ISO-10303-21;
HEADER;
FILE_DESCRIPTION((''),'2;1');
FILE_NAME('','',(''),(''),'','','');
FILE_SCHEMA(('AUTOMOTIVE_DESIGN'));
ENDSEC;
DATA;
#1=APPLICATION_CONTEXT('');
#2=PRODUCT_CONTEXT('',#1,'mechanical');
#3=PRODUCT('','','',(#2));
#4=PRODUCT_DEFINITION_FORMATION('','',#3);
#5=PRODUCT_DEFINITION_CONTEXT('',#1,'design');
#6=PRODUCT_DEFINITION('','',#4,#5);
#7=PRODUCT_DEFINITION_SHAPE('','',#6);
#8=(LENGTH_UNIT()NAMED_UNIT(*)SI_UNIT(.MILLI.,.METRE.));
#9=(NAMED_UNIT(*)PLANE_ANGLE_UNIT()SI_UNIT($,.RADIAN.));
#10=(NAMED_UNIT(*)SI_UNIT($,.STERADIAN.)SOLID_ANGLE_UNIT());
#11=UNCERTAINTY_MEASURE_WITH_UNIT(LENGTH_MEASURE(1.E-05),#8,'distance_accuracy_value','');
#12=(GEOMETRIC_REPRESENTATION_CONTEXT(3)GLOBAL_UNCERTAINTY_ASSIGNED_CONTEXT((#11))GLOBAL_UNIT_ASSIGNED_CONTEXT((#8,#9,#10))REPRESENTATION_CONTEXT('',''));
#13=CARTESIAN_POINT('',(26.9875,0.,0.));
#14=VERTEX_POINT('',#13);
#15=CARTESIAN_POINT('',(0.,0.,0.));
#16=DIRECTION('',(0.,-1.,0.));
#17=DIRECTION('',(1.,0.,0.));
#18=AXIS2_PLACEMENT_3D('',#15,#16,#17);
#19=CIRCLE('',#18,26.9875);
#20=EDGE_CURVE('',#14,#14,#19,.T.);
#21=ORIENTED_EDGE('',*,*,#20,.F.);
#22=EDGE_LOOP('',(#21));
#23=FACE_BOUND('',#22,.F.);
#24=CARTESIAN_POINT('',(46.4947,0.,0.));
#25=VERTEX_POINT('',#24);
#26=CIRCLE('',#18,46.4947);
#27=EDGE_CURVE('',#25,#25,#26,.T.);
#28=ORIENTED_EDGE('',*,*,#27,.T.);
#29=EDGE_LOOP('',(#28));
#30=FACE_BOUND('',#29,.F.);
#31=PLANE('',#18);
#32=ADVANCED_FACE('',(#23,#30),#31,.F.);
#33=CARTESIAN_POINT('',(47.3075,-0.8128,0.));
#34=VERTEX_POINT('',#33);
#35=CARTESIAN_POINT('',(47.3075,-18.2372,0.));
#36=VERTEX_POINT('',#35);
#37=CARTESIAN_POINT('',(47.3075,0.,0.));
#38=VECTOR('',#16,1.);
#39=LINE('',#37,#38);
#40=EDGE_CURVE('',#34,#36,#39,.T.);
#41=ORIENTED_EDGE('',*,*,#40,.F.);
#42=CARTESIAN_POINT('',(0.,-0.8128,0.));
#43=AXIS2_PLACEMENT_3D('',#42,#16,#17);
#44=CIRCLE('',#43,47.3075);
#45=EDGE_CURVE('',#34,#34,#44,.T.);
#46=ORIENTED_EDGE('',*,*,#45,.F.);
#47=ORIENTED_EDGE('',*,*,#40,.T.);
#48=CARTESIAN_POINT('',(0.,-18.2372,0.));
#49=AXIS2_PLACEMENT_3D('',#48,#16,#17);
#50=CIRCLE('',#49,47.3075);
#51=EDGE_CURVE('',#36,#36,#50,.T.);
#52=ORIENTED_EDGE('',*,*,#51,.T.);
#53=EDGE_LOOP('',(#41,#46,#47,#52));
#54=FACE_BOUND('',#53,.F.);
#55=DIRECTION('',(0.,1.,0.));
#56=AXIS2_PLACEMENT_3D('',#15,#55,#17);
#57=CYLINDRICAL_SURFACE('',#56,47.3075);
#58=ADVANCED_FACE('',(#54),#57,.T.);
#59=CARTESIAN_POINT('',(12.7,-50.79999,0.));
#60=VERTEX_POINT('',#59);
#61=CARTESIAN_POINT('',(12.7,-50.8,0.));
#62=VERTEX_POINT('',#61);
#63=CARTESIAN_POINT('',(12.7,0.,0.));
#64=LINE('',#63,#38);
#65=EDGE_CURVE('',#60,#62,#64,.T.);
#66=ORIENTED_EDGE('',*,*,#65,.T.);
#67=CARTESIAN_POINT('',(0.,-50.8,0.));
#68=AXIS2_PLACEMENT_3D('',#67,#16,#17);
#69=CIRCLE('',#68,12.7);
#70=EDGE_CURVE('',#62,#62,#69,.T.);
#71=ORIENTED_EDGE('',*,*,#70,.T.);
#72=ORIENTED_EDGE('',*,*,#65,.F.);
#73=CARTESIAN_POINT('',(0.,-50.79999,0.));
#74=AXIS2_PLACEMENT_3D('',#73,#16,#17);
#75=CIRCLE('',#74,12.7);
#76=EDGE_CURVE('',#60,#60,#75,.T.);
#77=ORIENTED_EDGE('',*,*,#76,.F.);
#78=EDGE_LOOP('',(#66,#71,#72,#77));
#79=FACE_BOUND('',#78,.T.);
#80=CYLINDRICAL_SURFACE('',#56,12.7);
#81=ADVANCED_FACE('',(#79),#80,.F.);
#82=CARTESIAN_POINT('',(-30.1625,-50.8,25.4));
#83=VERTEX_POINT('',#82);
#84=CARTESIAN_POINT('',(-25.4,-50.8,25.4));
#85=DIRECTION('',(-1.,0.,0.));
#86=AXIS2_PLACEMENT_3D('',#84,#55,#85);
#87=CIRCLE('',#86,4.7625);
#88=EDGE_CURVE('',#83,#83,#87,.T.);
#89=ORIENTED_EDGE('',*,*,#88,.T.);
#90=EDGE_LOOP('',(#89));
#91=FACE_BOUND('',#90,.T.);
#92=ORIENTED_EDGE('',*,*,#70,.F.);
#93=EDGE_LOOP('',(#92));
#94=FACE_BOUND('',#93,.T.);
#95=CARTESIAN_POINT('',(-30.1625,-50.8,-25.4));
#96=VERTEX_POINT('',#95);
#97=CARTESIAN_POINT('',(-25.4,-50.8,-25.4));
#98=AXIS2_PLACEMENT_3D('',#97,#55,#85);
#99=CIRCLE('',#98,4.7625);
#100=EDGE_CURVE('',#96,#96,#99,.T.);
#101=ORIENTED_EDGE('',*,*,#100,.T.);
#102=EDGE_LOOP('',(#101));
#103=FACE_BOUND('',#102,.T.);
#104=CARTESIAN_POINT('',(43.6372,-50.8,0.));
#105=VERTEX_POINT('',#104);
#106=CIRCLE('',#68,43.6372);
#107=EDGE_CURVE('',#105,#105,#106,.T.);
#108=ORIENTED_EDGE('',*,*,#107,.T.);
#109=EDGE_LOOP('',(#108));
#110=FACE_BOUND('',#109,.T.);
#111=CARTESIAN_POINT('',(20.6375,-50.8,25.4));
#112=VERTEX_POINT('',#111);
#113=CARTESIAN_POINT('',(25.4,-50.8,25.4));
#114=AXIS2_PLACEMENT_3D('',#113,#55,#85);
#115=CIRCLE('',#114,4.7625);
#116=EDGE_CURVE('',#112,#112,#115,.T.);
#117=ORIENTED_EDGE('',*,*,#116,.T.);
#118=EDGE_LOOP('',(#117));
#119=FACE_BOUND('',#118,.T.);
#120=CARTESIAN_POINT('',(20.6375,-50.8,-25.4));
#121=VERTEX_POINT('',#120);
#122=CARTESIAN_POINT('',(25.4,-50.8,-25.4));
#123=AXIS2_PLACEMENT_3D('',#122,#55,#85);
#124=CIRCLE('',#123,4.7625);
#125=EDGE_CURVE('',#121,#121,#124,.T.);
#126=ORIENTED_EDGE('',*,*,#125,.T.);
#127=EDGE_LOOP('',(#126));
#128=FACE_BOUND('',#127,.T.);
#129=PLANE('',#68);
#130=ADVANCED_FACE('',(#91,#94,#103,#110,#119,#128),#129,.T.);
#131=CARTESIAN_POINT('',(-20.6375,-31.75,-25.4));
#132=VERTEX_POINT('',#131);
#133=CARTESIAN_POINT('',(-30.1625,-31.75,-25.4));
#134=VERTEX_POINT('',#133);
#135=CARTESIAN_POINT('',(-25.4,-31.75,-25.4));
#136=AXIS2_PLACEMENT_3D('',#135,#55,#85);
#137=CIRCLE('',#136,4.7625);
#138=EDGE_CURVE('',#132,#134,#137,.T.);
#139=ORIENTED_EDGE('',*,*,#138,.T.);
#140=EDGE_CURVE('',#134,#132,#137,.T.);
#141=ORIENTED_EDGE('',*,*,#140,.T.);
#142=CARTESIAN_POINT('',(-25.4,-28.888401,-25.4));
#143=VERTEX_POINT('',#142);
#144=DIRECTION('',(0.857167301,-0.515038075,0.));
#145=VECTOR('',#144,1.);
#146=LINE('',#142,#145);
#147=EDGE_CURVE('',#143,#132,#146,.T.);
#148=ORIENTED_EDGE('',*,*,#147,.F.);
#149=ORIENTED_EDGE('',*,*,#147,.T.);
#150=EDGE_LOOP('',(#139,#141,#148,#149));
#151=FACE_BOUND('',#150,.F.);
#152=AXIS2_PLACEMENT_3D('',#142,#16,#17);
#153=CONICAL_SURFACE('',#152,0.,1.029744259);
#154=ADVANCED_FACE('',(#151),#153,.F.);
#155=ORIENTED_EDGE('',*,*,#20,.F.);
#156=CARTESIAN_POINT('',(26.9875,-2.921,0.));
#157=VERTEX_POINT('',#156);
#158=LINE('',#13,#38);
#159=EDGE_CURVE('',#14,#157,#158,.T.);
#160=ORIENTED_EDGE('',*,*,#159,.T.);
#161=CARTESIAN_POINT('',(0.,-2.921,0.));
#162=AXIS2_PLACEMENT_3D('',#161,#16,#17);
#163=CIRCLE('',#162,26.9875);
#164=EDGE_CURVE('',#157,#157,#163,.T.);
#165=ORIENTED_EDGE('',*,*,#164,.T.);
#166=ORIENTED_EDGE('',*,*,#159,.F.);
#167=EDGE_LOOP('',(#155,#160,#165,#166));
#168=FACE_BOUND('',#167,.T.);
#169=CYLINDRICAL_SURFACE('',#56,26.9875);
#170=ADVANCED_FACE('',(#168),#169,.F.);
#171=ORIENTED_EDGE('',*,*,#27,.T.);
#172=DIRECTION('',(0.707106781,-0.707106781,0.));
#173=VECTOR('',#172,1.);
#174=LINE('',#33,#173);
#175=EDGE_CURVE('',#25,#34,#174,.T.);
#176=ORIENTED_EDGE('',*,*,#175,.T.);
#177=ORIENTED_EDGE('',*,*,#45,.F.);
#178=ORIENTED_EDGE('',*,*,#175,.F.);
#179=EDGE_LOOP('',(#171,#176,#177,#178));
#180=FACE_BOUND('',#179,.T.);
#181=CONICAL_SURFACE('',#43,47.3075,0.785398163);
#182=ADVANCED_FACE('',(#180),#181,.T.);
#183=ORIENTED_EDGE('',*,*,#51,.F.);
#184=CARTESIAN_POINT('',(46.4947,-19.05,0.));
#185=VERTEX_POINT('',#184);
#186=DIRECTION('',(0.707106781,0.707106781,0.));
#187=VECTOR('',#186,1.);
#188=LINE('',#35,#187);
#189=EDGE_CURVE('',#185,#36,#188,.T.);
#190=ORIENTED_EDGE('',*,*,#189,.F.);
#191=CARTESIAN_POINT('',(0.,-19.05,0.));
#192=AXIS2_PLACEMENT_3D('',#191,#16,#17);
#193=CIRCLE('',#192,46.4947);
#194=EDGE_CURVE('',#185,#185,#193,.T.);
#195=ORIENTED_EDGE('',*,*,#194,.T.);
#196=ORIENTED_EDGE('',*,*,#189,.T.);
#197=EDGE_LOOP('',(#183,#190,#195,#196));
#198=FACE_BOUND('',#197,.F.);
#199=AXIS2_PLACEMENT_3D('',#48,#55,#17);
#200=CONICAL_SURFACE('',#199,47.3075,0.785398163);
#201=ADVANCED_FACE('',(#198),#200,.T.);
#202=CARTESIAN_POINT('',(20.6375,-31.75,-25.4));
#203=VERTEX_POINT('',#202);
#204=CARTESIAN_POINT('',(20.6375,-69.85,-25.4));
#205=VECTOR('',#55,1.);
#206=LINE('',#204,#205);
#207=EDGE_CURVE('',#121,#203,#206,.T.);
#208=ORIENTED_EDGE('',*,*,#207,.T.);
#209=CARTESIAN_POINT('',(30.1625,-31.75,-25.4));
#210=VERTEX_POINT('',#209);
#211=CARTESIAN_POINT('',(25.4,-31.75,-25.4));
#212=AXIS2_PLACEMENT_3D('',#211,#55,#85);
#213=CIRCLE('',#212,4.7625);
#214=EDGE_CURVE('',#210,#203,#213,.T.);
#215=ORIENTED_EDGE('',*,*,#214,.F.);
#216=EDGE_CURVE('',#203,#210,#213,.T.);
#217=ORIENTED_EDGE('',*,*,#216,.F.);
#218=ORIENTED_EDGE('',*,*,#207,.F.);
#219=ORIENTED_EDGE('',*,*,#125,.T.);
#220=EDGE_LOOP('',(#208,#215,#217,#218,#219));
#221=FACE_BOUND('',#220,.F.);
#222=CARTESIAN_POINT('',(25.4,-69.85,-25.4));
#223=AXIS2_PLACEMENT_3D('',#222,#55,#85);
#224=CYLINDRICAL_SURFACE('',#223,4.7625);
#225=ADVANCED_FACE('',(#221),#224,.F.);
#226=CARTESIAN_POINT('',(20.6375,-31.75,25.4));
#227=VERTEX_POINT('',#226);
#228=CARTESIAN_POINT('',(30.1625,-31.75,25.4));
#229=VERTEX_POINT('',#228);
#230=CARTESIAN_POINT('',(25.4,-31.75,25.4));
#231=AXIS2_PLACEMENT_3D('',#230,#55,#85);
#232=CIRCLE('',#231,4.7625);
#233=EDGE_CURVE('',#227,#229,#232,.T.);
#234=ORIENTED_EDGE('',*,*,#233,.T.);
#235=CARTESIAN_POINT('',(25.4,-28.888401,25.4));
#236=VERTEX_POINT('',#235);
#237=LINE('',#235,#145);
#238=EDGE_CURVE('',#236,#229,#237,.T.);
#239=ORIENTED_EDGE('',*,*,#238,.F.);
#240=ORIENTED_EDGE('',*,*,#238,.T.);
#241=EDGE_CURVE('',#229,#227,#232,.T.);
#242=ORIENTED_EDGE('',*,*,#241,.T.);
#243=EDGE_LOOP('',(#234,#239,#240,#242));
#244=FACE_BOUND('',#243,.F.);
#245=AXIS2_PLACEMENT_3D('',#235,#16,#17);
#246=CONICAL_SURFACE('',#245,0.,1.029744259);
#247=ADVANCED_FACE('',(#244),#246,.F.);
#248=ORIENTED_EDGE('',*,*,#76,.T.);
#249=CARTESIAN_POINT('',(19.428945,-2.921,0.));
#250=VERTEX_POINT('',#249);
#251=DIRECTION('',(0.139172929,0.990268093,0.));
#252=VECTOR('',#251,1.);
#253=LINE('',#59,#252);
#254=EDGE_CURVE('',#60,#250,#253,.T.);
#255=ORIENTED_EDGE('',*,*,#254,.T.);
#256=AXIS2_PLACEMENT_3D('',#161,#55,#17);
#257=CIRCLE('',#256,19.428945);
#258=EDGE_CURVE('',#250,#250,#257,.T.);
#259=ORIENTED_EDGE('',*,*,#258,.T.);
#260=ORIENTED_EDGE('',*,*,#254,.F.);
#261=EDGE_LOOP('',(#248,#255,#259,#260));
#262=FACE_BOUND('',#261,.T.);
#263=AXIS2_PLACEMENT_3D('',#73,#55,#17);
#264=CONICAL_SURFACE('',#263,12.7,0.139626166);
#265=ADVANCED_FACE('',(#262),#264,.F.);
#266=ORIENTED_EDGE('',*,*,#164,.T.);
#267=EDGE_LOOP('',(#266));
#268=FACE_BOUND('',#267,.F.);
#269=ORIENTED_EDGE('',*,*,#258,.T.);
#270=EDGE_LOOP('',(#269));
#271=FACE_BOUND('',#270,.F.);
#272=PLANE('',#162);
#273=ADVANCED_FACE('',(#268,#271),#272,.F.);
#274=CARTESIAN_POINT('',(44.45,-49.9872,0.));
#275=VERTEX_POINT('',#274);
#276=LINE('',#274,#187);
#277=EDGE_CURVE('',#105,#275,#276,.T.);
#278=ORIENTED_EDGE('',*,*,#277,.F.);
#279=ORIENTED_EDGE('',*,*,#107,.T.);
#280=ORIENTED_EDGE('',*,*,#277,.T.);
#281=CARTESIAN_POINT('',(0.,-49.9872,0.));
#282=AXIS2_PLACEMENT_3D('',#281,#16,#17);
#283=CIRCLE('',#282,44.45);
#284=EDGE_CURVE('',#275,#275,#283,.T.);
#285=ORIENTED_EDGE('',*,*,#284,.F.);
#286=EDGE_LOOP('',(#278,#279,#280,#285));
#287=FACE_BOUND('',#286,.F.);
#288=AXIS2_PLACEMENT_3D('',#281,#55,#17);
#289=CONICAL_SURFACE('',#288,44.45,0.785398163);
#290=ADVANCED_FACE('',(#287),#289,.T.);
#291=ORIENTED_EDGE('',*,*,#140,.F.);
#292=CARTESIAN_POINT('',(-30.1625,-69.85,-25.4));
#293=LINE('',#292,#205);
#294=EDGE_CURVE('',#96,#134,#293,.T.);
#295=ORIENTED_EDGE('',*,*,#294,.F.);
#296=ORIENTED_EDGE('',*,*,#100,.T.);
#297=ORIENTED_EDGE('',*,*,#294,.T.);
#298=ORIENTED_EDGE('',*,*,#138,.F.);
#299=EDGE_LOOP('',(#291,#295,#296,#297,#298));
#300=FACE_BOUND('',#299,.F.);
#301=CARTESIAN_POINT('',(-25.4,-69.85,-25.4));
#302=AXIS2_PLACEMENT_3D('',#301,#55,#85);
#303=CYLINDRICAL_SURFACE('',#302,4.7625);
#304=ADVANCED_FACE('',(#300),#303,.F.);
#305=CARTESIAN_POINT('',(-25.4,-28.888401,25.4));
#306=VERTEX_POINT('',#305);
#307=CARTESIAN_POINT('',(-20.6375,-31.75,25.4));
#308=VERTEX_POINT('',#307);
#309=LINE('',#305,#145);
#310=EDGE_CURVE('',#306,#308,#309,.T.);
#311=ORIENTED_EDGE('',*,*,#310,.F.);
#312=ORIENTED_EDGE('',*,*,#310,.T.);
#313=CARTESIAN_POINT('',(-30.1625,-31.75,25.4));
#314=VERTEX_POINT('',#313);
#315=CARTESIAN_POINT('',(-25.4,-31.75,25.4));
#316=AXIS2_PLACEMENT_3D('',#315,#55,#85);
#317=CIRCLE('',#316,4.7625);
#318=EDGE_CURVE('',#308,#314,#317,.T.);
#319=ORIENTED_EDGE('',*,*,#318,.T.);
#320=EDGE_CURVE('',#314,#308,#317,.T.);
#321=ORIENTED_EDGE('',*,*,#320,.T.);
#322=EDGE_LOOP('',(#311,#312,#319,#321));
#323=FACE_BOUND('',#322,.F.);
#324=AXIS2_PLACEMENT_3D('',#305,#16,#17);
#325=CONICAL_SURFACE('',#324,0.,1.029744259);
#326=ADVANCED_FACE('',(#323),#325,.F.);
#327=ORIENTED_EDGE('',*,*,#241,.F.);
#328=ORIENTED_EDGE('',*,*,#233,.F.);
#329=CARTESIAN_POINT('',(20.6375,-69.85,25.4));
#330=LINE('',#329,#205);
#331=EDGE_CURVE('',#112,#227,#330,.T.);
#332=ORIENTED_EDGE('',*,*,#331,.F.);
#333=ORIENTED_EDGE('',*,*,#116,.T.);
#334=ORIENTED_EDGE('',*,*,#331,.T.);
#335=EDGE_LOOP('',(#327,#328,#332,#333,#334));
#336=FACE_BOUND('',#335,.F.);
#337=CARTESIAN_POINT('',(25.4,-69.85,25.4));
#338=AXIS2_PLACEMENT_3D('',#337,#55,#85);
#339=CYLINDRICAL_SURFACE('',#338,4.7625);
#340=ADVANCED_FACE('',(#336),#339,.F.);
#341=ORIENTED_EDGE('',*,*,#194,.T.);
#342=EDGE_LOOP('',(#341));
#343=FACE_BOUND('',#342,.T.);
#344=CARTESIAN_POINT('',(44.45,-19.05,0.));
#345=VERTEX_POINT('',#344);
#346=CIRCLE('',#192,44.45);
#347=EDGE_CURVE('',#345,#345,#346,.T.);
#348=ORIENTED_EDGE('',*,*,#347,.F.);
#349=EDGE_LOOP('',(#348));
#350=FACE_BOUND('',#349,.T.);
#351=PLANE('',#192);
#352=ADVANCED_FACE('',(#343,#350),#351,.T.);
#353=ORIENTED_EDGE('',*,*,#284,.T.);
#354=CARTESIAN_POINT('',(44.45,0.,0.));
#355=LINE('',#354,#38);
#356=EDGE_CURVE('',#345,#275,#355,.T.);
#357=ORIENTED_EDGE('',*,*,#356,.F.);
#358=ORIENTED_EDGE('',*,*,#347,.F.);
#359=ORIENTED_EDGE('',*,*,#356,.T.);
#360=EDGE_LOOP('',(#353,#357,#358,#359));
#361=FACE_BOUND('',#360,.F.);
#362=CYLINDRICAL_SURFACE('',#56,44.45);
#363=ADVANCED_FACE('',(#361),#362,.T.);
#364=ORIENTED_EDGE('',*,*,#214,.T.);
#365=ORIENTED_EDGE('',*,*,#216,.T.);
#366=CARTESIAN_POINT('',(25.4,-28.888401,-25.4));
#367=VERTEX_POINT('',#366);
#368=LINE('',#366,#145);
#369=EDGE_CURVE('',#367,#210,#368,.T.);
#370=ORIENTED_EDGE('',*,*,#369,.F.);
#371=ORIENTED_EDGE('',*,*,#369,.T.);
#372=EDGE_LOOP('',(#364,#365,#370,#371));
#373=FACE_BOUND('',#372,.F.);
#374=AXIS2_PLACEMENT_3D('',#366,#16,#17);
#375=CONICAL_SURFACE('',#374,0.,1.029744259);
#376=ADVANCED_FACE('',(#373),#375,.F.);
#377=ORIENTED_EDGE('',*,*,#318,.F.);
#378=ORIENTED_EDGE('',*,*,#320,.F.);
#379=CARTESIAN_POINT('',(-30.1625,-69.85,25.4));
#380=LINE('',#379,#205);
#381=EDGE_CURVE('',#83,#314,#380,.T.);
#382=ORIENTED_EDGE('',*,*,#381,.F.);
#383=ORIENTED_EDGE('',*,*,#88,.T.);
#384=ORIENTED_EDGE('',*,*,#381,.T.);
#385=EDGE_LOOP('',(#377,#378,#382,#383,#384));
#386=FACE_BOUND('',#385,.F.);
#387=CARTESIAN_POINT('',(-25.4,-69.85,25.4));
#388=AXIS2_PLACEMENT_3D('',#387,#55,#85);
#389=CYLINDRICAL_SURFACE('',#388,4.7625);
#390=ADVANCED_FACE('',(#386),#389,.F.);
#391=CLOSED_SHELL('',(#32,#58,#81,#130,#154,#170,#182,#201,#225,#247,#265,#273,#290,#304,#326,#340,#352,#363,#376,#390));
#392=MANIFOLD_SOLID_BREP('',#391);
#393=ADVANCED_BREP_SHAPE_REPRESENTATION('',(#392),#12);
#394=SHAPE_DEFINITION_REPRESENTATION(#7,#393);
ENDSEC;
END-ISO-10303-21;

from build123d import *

# Parameters (mm, degrees)
F0_R     = 47.3075
F0_R_2   = 44.45
F1_DEPTH = 19.05
F0_R_3   = 12.7
F2_DEPTH = 50.8
F3_SIZE2 = 7.139464
F3_SIZE  = 50.79999
F4_R     = 26.9875
F4_R_2   = 12.7
F5_DEPTH = 2.921
F7_D     = 9.525
F7_DEPTH = 19.05
F7_TIP   = 2.8615986981
F8_SIZE  = 0.8128


# Not quite as in the source:
# - a fillet or chamfer is up to 0.001 mm smaller than in the source, because OpenCascade refuses the exact size


with BuildPart() as f1:
    # F0 (on Front) → F1 (new body)
    with BuildSketch(Plane.XZ):
        Circle(F0_R)
        Circle(F0_R_2, mode=Mode.SUBTRACT)
    extrude(amount=F1_DEPTH)

    # F0 (on Front) → F2 (join)
    with BuildSketch(Plane.XZ):
        Circle(F0_R_2)
        Circle(F0_R_3, mode=Mode.SUBTRACT)
    extrude(amount=F2_DEPTH)

    # F3 (size 50.8 and 7.1394744029 in the source; OpenCascade refuses exactly that, so slightly less here)
    f3_edges = [f1.edges().sort_by_distance(p)[0] for p in [
        (-12.7, 0, 0),
    ]]
    f3_side = f1.faces().sort_by_distance((-12.7, -25.4, 0))[0]
    chamfer(f3_edges, length=F3_SIZE, length2=F3_SIZE2, reference=f3_side)

    # F4 (on face) → F5 (cut)
    with BuildSketch(Plane.XZ):
        Circle(F4_R)
        Circle(F4_R_2, mode=Mode.SUBTRACT)
    extrude(amount=F5_DEPTH, mode=Mode.SUBTRACT)

    # F7
    with Locations(Plane.XZ.offset(50.8)):
        with Locations((-25.4, 25.4), (25.4, 25.4), (-25.4, -25.4), (25.4, -25.4)):
            Hole(F7_D / 2, depth=F7_DEPTH)
            with Locations((0, 0, -(F7_DEPTH + F7_TIP / 2))):  # 118° drill point
                Cone(0, F7_D / 2, F7_TIP, mode=Mode.SUBTRACT)

    # F8
    f8_edges = [f1.edges().sort_by_distance(p)[0] for p in [
        (-44.45, -50.8, 0),
        (-47.3075, -19.05, 0),
        (-47.3075, 0, 0),
    ]]
    chamfer(f8_edges, length=F8_SIZE)


solid = f1.part
